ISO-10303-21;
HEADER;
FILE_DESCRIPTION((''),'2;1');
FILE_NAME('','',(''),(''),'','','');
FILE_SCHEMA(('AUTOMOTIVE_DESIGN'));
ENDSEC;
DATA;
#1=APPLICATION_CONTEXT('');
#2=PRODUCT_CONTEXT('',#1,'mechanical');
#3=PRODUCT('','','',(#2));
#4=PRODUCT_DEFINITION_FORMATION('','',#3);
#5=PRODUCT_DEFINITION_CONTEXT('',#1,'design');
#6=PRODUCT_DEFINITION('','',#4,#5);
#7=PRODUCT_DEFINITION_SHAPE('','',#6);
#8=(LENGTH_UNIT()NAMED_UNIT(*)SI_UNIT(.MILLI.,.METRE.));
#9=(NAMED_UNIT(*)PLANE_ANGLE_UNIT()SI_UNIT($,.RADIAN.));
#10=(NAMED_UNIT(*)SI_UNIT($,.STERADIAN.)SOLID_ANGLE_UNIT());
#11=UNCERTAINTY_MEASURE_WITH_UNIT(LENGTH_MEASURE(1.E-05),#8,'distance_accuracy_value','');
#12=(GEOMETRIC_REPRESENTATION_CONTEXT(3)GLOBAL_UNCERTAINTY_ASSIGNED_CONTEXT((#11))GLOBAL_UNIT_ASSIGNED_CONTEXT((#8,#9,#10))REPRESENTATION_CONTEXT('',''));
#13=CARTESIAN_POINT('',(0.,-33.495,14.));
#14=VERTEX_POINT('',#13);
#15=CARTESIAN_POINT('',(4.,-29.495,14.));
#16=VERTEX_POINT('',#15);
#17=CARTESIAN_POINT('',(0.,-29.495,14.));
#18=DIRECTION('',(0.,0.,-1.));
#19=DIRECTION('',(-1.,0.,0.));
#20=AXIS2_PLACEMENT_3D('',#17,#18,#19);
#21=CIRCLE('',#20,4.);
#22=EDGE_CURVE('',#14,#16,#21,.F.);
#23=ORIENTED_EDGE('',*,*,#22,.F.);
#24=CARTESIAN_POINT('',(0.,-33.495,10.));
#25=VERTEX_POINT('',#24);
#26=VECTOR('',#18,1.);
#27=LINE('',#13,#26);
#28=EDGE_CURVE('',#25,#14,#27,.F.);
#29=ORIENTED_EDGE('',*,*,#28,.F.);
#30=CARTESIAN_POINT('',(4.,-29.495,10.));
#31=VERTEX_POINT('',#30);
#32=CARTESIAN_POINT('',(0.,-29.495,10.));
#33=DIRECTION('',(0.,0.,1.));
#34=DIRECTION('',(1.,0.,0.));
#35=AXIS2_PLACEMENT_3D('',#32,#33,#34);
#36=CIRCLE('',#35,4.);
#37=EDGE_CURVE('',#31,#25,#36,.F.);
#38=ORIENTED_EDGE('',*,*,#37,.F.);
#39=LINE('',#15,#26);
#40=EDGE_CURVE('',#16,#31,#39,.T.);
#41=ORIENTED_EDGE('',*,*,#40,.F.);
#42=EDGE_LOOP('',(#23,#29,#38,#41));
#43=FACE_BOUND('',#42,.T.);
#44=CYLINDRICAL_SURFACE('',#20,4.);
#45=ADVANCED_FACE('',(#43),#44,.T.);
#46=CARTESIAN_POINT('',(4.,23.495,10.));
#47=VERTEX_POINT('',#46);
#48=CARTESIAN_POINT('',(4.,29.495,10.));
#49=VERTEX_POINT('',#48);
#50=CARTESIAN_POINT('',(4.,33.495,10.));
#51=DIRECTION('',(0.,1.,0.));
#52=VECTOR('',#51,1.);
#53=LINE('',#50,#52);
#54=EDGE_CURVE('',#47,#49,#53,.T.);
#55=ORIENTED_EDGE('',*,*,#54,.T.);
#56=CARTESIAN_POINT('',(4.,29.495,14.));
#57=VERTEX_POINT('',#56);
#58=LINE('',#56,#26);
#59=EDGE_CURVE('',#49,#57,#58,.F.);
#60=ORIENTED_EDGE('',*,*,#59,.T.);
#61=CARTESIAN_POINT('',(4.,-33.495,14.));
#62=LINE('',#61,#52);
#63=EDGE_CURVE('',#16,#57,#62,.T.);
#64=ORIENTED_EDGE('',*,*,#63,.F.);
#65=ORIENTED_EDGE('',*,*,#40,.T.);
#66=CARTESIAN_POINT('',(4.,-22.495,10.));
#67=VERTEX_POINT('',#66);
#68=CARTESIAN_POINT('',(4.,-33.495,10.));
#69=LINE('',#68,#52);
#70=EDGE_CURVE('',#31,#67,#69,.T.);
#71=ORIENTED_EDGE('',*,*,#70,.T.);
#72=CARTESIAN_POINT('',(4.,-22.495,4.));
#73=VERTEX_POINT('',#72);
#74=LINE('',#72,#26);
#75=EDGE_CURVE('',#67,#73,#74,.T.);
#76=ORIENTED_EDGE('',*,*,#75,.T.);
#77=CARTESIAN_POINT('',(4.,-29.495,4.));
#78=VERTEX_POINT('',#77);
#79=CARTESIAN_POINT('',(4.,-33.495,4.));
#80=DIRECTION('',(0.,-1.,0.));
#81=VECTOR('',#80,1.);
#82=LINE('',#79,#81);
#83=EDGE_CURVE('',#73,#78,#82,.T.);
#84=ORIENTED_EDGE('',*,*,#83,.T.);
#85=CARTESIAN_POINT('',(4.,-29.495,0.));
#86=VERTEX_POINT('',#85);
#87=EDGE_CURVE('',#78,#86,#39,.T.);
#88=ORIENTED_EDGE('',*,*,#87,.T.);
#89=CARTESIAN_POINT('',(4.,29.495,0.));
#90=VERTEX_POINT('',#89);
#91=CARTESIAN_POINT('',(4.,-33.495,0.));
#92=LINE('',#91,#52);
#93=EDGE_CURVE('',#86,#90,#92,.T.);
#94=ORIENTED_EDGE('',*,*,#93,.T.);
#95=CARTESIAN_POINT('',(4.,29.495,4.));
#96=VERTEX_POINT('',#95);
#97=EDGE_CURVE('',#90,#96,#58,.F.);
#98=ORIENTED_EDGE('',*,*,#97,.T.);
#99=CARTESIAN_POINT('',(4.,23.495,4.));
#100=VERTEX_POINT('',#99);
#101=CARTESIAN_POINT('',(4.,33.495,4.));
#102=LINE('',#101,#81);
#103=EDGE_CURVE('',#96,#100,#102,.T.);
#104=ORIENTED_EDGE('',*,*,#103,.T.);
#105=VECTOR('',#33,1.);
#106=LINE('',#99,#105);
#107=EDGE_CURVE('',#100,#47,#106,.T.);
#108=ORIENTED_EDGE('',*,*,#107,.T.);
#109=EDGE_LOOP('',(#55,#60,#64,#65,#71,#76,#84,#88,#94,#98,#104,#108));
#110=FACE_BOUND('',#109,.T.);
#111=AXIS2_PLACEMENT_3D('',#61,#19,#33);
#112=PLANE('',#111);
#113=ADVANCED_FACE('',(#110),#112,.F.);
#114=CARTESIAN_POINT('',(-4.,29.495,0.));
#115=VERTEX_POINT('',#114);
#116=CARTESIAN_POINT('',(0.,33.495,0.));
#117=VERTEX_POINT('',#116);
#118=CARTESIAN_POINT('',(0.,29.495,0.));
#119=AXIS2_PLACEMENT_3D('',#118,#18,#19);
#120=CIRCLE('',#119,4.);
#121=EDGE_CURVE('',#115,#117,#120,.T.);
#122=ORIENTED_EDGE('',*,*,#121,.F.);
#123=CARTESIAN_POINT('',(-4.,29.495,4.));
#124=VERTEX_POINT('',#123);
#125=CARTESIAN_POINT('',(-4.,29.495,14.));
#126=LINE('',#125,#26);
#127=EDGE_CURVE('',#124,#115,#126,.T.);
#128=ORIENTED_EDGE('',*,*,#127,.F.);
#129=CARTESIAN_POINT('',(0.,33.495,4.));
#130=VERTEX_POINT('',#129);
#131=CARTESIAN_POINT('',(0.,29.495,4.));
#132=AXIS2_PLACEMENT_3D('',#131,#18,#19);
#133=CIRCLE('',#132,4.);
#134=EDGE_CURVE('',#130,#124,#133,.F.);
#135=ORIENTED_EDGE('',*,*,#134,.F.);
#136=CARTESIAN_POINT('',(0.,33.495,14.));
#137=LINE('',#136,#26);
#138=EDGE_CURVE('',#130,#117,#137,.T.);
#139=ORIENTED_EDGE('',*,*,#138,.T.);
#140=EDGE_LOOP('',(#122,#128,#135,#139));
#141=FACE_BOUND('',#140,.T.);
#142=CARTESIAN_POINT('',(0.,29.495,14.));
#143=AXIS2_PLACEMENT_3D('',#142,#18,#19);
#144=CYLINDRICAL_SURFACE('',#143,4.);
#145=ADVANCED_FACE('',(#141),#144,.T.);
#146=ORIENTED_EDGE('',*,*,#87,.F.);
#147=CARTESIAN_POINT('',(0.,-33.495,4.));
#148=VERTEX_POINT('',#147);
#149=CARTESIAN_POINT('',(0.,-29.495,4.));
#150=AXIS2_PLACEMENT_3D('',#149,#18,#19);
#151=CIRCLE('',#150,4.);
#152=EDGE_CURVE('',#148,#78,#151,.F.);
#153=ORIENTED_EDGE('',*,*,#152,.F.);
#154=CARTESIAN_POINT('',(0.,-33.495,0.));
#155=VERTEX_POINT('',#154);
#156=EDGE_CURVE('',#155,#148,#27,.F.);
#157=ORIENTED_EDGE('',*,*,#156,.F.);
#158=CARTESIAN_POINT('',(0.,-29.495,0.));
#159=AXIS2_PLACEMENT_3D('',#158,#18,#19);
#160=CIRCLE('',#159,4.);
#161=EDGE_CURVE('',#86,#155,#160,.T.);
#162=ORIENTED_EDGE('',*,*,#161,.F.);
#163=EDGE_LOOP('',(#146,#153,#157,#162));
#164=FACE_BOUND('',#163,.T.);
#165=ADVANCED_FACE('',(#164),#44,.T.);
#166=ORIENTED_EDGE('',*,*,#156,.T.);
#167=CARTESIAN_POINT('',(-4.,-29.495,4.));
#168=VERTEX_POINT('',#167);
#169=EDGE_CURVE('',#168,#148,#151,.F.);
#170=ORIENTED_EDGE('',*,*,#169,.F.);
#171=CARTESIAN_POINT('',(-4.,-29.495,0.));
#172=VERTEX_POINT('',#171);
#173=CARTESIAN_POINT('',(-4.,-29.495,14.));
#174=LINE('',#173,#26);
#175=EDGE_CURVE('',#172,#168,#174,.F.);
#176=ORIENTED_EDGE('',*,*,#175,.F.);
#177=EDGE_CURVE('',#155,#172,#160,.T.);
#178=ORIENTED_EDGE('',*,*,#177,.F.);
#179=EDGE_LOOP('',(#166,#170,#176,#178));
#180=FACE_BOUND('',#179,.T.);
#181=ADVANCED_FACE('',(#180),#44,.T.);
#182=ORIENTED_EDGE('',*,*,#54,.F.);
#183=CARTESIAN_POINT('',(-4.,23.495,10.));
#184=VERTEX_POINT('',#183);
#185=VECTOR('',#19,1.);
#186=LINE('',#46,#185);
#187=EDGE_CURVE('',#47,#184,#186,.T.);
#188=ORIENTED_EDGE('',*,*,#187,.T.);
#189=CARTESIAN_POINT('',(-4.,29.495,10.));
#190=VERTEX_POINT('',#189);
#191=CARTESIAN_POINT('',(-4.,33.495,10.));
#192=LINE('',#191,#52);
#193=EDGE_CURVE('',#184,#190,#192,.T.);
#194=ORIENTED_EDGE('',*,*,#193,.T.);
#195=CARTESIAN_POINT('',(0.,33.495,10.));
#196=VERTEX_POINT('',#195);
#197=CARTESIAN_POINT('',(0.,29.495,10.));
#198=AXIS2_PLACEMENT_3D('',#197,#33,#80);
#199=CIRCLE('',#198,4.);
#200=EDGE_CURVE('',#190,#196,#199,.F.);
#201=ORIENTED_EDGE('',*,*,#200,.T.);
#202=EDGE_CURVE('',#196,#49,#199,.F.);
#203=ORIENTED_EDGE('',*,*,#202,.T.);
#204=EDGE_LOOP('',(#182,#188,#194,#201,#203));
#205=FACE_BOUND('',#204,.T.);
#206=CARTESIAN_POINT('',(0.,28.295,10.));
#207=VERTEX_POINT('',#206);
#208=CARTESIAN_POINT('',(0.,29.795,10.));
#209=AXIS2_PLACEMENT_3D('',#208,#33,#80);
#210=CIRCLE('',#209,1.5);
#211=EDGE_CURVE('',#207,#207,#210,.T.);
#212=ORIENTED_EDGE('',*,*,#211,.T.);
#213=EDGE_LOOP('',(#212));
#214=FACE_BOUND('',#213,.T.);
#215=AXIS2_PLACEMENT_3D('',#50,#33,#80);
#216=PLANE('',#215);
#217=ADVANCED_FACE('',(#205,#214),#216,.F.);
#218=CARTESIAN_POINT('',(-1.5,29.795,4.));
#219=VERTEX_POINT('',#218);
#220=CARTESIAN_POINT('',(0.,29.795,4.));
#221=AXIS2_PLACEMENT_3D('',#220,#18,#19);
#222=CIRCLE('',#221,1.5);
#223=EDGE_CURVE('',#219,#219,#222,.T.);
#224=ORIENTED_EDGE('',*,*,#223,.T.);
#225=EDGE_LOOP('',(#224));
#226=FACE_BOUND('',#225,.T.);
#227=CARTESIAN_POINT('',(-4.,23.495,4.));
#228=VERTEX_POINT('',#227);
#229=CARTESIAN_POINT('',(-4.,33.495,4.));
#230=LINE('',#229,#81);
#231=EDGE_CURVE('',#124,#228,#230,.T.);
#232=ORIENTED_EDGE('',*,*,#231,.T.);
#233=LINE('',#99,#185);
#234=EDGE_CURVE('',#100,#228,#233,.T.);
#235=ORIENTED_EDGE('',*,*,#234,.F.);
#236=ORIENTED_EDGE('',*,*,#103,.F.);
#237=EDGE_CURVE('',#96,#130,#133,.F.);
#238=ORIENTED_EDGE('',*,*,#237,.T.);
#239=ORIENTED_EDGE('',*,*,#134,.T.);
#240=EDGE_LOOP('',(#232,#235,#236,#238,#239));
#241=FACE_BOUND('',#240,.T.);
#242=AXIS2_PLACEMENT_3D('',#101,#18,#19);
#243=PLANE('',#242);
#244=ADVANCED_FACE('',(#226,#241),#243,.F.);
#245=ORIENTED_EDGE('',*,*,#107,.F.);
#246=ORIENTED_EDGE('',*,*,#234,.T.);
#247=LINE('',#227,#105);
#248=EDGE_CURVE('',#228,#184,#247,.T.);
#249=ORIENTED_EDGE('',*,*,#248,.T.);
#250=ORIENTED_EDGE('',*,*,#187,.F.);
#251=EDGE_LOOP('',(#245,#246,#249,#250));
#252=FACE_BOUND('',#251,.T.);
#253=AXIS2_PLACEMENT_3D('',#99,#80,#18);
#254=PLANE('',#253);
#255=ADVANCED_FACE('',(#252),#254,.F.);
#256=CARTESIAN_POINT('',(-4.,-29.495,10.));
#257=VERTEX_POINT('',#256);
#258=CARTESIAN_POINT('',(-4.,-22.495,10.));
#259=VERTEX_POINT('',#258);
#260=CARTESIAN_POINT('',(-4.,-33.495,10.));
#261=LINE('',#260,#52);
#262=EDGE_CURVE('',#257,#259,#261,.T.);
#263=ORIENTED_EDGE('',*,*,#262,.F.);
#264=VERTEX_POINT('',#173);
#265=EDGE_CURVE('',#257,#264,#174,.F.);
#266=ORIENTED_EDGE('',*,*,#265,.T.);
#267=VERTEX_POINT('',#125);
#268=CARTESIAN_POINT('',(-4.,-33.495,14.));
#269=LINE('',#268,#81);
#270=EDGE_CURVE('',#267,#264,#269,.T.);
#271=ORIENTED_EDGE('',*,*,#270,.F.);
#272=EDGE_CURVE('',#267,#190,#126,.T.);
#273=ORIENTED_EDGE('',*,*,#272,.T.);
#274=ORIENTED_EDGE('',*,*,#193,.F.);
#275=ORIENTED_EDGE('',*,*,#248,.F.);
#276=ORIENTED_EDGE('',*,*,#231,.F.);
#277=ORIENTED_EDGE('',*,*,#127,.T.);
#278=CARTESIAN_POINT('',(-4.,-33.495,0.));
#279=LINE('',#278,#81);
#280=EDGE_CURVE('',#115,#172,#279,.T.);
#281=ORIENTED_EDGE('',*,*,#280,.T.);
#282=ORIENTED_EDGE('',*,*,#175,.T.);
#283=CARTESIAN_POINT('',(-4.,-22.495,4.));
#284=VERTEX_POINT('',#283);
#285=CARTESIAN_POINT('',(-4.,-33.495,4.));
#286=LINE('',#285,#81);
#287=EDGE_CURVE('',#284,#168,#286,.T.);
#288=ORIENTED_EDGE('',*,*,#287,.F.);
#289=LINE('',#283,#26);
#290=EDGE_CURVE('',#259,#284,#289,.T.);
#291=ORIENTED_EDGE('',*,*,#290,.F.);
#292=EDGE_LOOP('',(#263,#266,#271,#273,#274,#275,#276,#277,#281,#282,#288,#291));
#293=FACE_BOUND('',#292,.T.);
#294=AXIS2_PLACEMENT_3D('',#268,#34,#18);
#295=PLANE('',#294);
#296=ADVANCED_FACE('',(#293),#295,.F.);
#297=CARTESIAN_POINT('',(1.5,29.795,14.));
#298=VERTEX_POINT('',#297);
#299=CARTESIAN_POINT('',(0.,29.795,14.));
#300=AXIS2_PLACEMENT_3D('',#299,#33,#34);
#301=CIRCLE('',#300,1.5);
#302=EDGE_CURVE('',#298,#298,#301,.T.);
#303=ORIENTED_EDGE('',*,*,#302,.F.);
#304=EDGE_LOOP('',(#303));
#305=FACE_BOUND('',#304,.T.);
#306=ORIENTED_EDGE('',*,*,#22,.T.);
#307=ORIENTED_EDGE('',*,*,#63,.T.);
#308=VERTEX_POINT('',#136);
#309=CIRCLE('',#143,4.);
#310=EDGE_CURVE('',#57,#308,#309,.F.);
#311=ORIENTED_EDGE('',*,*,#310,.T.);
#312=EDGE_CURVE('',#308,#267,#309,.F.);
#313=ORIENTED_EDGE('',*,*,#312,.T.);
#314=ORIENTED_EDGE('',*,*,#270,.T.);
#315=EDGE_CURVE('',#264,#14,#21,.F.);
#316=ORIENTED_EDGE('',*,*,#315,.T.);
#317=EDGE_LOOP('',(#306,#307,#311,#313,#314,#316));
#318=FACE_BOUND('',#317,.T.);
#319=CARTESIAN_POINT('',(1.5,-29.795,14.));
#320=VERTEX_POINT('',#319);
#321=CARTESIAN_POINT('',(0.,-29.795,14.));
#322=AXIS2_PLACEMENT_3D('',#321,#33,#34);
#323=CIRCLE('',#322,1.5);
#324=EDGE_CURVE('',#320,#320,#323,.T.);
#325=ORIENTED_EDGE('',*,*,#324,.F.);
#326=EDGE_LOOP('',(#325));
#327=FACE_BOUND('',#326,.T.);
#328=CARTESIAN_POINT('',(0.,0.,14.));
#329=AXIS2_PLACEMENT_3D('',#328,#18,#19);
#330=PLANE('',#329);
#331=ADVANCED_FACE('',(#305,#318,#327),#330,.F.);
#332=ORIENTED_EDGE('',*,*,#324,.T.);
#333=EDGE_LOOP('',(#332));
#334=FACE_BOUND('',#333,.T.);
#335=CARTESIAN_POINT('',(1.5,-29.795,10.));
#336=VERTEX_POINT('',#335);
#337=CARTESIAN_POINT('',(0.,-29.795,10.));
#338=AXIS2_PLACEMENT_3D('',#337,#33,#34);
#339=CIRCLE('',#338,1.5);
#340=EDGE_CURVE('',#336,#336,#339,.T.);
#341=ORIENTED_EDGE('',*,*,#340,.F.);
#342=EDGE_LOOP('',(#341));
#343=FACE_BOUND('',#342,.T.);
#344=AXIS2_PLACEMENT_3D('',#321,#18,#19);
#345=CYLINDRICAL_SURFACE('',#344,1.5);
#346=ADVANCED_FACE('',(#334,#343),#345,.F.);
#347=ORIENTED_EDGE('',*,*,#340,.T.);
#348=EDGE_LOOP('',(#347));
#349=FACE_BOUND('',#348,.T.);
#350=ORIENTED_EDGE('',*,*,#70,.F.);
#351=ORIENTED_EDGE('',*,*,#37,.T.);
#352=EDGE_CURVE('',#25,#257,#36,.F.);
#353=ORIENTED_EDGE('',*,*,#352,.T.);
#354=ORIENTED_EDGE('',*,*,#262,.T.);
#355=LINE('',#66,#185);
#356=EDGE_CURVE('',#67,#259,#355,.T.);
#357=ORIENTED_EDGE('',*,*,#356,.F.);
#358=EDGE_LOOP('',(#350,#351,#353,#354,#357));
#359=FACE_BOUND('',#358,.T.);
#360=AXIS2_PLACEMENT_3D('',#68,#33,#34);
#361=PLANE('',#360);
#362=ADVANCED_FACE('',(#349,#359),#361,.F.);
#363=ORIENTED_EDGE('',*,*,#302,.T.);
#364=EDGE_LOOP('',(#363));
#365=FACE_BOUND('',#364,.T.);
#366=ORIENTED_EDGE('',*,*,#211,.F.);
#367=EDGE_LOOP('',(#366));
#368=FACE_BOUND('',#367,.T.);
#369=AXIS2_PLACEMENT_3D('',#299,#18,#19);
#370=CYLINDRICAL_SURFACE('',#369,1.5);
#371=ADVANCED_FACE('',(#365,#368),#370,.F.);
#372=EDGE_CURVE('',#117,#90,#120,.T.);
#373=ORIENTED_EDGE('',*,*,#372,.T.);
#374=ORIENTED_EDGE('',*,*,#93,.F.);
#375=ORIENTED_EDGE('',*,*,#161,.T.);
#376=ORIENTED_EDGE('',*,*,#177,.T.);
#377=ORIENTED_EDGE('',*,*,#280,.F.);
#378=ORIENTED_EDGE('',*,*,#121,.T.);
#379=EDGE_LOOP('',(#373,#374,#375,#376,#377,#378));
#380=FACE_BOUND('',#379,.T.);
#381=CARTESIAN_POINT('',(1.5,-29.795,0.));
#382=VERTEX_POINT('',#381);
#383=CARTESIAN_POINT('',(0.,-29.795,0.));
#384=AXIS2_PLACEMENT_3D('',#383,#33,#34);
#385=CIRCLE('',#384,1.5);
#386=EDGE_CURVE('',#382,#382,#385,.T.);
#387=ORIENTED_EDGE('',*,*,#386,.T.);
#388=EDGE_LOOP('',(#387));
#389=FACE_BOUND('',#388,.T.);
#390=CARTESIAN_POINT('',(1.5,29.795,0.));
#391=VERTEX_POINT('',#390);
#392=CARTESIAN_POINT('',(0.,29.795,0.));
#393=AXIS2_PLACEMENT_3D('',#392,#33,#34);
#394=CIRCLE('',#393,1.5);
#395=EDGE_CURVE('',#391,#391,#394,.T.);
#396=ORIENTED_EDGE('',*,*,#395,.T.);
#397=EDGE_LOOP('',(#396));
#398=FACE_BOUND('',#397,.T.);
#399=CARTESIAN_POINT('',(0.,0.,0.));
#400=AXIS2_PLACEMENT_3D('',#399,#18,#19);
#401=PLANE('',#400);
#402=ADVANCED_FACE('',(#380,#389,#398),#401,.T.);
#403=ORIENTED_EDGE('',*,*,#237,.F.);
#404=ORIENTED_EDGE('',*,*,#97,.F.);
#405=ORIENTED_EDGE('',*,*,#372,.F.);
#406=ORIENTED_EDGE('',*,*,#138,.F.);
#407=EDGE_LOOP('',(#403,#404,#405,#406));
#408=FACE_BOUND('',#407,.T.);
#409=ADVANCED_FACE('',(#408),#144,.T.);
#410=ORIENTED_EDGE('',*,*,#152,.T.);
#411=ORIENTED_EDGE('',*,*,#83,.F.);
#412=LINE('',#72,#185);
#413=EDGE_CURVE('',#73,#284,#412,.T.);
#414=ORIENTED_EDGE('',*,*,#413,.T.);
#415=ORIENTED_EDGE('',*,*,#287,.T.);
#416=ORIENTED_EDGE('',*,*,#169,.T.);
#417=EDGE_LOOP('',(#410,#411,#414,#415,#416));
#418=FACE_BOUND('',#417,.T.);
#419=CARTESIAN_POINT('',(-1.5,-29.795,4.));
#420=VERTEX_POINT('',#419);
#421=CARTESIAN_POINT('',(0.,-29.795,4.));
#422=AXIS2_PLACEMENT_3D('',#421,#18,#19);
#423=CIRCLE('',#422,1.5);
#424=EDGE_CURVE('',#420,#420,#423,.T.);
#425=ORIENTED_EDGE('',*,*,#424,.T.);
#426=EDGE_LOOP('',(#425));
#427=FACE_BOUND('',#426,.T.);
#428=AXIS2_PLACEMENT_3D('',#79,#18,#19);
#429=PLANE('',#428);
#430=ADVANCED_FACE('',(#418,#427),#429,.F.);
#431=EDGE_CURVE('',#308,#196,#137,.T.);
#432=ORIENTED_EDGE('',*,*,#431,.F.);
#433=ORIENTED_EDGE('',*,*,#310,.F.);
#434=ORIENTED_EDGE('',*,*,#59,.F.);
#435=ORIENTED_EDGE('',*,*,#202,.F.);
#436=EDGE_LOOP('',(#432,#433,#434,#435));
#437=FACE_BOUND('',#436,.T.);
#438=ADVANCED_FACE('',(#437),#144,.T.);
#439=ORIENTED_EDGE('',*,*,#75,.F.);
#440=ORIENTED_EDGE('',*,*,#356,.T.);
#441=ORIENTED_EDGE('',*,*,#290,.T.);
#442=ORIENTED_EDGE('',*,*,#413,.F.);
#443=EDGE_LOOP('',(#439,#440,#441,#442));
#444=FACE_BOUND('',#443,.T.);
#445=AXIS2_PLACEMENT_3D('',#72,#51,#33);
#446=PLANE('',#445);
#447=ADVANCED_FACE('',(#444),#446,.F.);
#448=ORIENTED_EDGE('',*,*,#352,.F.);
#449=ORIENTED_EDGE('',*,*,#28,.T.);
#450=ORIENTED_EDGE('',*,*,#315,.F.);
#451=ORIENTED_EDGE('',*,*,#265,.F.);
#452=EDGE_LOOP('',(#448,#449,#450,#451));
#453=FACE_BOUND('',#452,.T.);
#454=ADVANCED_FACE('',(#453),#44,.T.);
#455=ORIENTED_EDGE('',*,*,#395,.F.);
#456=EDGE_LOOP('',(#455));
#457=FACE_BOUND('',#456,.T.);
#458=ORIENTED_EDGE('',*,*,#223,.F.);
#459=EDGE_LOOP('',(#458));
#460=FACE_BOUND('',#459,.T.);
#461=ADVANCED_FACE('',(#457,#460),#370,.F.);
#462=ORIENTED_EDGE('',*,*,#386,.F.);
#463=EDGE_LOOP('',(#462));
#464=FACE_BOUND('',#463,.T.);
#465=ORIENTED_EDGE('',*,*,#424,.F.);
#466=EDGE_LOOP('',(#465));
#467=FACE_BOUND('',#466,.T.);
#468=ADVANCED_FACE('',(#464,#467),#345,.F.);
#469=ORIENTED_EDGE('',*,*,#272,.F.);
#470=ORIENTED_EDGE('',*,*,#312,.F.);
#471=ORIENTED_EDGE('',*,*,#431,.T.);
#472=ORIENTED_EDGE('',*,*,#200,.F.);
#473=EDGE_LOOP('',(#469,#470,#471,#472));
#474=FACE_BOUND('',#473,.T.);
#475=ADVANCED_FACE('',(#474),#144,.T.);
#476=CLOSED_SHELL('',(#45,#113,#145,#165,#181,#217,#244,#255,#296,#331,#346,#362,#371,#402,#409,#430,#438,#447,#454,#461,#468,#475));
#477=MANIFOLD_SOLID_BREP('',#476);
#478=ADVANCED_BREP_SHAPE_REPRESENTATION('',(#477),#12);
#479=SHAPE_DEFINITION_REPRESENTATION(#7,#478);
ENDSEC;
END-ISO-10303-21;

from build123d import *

# Parameters (mm, degrees)
SKETCH1_W           = 8
SKETCH1_H           = 66.99
SKETCH1_R           = 1.5
BOSS_EXTRUDE1_DEPTH = 14
FILLET1_R           = 4
SKETCH2_W           = 6
SKETCH2_H           = 10
SKETCH2_H_2         = 11
CUT_EXTRUDE1_DEPTH  = 38.174117676


with BuildPart() as part:
    # Sketch1 → Boss-Extrude1 (new body)
    with BuildSketch(Plane.XY):
        Rectangle(SKETCH1_W, SKETCH1_H)
        with Locations((0, 29.795)):
            Circle(SKETCH1_R, mode=Mode.SUBTRACT)
        with Locations((0, -29.795)):
            Circle(SKETCH1_R, mode=Mode.SUBTRACT)
    extrude(amount=BOSS_EXTRUDE1_DEPTH)

    # Fillet1
    fillet1_edges = [part.edges().sort_by_distance(p)[0] for p in [
        (-4, -33.495, 7),
        (4, -33.495, 7),
        (-4, 33.495, 7),
        (4, 33.495, 7),
    ]]
    fillet(fillet1_edges, radius=FILLET1_R - 0.0001)  # a hair under: the kernel refuses the full size

    # Sketch2 → Cut-Extrude1 (cut, through all)
    with BuildSketch(Plane.ZY.offset(4)):
        with Locations((7, 28.495)):
            Rectangle(SKETCH2_W, SKETCH2_H)
        with Locations((7, -27.995)):
            Rectangle(SKETCH2_W, SKETCH2_H_2)
    extrude(amount=-CUT_EXTRUDE1_DEPTH, mode=Mode.SUBTRACT)


solid = part.part
